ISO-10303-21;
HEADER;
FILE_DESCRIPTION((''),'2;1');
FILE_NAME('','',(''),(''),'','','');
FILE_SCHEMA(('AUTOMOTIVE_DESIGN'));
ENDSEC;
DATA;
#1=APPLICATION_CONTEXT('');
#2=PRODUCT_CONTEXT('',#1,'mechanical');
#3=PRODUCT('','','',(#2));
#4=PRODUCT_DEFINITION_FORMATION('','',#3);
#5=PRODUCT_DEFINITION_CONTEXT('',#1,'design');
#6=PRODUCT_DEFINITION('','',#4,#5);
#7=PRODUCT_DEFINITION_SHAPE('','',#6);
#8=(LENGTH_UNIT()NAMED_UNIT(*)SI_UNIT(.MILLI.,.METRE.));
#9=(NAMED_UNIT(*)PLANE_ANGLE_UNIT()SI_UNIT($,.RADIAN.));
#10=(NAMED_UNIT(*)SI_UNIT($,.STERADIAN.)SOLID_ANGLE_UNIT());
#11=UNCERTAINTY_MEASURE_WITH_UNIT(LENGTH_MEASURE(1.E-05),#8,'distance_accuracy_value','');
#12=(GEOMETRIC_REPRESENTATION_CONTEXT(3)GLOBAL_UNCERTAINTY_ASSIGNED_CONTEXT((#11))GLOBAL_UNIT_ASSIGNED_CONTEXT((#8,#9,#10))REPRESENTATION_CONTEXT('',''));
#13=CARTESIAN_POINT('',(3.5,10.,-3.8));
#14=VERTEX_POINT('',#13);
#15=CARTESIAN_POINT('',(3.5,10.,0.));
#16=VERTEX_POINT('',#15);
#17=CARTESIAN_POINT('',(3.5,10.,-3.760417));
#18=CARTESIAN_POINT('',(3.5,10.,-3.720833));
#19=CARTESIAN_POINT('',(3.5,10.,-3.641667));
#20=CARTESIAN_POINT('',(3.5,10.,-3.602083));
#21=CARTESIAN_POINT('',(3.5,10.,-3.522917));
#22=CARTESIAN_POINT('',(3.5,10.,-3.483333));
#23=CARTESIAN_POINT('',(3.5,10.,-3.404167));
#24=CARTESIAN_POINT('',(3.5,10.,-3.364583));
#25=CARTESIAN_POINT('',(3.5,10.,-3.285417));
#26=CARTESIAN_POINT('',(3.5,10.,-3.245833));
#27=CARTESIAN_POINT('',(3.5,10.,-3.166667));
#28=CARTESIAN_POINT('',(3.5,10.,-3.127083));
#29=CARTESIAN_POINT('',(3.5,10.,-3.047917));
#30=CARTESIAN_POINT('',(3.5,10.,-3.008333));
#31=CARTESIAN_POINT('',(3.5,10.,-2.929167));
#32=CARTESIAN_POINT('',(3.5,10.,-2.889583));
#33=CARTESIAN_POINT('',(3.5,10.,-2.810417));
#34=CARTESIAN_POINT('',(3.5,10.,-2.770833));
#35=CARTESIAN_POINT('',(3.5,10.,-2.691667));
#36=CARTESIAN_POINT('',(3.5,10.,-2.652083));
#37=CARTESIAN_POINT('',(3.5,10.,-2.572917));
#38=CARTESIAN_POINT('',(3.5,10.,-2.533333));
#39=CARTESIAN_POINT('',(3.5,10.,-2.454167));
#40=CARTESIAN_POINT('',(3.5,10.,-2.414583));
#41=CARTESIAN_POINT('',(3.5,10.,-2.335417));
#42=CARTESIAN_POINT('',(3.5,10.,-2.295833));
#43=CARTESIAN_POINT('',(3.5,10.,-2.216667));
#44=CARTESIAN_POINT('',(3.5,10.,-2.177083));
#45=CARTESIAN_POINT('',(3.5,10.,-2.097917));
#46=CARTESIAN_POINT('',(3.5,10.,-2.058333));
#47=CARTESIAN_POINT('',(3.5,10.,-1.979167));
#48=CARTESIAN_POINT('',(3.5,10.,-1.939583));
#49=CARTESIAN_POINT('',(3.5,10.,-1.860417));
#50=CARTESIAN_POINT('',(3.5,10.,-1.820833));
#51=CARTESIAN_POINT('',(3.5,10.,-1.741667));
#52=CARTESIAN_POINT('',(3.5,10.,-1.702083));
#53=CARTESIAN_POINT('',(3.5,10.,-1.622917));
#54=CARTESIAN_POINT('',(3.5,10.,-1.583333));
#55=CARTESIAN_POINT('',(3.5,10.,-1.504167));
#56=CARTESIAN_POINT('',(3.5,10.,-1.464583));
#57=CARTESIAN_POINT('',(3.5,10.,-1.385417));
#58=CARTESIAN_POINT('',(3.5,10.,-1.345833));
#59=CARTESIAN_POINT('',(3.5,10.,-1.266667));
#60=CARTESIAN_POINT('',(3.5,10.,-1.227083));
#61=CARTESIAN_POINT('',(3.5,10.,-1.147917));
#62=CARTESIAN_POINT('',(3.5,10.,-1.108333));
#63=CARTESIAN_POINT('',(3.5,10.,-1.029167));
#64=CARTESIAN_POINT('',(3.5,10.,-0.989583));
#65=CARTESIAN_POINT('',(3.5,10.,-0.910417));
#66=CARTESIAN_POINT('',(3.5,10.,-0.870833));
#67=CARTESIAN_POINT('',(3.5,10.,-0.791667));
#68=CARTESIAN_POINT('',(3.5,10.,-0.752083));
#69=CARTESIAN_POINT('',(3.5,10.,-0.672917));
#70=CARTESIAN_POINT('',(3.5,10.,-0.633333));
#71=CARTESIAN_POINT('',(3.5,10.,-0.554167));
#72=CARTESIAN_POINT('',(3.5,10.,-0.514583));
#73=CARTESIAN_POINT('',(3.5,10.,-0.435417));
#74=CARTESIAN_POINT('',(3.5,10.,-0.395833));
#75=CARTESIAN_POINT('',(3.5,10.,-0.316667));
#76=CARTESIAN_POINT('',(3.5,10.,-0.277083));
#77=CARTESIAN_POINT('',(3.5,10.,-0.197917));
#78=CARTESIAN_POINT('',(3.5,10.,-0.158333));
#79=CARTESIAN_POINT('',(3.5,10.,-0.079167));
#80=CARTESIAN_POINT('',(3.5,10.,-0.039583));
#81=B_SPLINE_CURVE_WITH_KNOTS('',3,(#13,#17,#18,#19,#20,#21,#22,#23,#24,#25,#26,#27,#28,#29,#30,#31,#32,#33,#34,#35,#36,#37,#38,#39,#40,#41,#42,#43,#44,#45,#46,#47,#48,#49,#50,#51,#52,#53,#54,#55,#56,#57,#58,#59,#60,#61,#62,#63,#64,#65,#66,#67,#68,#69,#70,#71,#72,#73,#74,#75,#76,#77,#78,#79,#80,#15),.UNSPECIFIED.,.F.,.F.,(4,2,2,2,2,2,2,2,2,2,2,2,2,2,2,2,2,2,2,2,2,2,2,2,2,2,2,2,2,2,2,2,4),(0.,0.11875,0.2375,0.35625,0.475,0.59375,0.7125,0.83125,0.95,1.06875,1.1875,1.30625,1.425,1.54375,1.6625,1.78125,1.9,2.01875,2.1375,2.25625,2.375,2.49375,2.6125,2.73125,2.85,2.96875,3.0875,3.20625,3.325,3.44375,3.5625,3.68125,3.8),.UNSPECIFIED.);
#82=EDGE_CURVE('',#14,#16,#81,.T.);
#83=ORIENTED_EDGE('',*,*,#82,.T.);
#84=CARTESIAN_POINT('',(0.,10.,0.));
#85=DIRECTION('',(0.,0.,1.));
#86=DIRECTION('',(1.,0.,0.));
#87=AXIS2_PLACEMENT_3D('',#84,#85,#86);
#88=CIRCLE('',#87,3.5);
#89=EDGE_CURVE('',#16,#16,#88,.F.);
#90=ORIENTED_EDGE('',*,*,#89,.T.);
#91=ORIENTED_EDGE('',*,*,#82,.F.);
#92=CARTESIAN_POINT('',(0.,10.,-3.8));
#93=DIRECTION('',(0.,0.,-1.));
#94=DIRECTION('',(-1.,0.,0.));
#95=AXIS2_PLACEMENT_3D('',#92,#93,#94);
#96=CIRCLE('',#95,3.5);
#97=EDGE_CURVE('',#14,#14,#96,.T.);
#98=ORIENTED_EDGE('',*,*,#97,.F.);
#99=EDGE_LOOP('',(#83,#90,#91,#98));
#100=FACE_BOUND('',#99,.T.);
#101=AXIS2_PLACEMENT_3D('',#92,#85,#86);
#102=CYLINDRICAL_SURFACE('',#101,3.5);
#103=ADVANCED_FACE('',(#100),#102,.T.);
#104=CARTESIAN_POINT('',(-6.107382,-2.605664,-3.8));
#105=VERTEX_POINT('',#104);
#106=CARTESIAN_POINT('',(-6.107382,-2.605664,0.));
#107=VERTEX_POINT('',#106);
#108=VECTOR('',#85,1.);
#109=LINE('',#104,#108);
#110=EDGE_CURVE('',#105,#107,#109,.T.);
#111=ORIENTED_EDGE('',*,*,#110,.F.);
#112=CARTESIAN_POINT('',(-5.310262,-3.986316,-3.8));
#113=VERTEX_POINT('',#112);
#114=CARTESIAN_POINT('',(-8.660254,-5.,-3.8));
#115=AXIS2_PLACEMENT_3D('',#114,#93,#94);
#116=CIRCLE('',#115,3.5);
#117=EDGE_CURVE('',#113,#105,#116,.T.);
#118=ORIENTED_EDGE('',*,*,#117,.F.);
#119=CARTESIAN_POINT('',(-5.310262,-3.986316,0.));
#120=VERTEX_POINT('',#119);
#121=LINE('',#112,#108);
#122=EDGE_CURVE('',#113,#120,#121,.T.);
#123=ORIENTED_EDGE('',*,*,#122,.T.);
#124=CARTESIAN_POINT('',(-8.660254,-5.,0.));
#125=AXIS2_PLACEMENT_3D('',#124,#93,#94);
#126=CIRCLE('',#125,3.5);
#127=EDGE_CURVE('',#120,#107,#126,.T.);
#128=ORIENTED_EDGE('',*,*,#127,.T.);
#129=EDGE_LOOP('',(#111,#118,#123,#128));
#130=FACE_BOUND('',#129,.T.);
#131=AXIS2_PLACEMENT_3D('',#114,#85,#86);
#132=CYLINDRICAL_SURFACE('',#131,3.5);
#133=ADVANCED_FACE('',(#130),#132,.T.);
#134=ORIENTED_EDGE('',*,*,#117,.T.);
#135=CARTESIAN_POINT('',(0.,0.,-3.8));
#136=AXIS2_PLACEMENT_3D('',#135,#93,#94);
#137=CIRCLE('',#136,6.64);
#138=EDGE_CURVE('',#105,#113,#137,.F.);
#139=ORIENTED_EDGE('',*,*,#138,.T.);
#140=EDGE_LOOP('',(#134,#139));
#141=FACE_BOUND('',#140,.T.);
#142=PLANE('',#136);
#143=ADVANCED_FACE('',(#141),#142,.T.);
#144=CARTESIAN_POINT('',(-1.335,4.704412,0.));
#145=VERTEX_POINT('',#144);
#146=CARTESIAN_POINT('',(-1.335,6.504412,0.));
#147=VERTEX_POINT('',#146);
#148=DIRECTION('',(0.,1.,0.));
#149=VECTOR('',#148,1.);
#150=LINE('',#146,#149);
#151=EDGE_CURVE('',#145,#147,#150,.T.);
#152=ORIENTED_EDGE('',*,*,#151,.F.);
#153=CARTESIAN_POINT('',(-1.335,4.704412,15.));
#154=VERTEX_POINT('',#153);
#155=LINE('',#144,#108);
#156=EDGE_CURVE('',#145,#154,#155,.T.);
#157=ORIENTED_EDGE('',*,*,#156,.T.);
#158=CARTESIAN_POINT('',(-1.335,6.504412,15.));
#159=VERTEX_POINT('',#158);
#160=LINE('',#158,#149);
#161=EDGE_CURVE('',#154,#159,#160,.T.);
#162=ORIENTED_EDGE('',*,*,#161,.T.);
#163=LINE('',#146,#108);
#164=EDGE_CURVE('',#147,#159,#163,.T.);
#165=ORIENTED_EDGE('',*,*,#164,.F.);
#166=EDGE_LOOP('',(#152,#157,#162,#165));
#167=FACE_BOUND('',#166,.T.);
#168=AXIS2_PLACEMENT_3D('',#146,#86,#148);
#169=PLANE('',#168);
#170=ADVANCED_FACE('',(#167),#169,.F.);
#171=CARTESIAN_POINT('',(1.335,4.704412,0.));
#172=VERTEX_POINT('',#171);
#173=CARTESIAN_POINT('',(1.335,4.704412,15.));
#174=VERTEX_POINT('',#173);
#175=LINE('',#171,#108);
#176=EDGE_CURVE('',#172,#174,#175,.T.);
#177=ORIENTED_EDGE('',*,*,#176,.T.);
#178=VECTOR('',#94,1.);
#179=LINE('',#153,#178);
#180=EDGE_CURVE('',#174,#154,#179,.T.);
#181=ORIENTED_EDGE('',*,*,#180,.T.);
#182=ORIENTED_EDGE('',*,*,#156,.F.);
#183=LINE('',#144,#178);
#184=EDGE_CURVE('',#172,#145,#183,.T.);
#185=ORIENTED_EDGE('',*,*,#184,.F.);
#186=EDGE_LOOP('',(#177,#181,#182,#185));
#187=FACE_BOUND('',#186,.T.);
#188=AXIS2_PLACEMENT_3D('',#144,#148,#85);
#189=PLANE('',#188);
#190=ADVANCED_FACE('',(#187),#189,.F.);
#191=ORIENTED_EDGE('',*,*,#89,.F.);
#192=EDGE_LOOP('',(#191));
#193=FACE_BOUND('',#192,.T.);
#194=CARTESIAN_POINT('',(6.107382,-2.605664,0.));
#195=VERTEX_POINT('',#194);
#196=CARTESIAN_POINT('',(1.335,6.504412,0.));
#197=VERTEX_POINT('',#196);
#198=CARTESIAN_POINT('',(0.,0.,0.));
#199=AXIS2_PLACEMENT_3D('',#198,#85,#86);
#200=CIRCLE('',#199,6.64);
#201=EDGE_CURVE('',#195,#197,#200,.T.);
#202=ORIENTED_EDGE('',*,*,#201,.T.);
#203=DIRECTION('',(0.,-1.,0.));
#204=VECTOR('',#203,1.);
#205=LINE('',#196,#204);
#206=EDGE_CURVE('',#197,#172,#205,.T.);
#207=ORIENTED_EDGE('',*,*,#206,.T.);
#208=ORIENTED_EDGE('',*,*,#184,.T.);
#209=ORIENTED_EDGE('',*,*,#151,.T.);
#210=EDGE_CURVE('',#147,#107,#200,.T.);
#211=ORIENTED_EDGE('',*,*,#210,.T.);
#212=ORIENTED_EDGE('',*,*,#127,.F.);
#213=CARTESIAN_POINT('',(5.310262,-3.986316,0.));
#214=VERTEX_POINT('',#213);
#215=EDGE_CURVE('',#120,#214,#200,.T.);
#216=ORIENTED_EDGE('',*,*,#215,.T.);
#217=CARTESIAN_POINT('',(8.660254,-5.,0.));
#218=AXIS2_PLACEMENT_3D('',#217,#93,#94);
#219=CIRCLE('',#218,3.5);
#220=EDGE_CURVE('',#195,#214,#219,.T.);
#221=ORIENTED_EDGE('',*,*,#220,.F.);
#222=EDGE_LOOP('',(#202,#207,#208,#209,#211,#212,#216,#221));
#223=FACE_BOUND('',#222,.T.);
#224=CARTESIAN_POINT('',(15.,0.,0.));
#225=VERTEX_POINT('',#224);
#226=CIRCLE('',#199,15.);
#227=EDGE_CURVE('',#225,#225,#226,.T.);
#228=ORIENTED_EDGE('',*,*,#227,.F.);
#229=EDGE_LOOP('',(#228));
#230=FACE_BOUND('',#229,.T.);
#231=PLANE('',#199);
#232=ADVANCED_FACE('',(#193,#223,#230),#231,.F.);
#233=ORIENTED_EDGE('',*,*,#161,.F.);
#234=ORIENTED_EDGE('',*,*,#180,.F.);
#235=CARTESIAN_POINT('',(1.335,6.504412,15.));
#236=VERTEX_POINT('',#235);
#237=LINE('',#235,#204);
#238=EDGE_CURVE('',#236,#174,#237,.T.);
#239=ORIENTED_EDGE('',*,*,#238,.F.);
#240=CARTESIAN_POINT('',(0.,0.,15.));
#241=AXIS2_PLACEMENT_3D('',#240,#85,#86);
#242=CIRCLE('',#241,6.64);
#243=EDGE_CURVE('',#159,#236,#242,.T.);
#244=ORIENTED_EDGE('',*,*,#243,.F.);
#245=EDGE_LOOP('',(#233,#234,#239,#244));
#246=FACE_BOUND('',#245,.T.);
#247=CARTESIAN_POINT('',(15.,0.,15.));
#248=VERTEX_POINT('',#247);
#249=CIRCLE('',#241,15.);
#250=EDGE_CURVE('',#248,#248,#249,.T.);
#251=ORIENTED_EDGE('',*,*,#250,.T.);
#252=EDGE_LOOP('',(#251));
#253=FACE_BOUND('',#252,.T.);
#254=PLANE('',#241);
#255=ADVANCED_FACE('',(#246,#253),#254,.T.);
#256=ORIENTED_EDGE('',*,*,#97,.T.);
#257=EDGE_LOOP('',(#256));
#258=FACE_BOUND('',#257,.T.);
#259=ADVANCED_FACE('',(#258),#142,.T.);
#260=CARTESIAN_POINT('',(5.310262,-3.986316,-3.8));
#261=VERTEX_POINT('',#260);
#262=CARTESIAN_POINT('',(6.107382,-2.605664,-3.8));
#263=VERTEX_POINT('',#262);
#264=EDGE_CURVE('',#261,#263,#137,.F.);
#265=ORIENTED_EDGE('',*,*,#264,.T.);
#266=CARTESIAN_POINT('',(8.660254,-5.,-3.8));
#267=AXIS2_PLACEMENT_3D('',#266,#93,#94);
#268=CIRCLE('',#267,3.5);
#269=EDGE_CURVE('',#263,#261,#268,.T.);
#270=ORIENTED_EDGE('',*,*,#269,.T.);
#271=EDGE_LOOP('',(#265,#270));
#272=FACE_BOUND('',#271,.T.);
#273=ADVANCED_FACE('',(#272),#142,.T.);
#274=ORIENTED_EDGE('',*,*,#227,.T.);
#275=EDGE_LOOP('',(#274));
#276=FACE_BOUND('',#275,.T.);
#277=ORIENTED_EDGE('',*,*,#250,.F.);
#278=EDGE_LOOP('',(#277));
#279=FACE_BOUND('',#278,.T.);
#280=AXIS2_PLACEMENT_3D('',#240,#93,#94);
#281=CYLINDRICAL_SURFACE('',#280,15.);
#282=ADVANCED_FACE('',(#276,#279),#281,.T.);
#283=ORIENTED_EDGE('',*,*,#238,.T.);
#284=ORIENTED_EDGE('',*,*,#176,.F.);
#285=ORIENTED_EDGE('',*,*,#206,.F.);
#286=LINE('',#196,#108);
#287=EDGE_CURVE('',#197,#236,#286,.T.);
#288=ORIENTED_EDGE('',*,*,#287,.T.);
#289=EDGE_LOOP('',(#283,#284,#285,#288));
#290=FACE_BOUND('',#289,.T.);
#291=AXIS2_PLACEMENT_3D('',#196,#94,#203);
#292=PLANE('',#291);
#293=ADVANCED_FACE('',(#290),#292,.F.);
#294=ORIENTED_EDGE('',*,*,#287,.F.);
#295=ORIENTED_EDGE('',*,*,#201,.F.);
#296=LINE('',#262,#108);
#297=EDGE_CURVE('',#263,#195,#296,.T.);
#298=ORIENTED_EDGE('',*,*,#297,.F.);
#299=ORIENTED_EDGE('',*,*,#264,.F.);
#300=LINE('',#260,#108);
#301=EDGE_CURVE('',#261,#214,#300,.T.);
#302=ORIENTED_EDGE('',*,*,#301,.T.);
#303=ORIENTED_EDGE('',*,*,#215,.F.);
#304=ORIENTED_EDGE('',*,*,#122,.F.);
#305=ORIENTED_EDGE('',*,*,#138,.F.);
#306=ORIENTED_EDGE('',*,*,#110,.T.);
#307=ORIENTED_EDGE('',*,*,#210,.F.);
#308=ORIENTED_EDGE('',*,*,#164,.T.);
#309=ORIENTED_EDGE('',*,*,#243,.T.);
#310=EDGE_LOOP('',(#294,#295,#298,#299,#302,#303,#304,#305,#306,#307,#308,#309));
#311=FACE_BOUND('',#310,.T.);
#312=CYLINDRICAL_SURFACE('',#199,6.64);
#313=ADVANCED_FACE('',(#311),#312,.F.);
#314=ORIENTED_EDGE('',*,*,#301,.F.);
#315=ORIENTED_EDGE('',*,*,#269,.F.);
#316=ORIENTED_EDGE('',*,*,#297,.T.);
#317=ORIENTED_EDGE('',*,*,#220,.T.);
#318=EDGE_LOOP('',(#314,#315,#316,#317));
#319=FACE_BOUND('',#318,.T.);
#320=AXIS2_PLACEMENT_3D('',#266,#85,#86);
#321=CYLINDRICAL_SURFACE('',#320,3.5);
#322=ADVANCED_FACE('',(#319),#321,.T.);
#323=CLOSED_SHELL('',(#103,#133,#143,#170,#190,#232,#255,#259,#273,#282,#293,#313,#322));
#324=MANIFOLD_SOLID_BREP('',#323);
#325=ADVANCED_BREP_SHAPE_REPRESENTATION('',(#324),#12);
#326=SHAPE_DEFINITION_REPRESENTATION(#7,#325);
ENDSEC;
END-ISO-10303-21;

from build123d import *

# Parameters (mm, degrees)
GEARFACEPROFILE_R        = 15
GEARFACEEXTRUDE_DEPTH    = 15
CENTERSLOT_DEPTH         = 26.980762114
GEARCONNECTORS_OUTLINE_R = 3.5
GEARCONNECTORS_DEPTH     = 3.8


# Read off the part's stored shape, not the designer's step: GearConnectors
with BuildPart() as part:
    # GearFaceProfile → GearFaceExtrude (new body)
    with BuildSketch(Plane.XY):
        Circle(GEARFACEPROFILE_R)
    extrude(amount=GEARFACEEXTRUDE_DEPTH)

    # Sketch1 → CenterSlot (cut, through all)
    with BuildSketch(Plane.XY.offset(15)):
        with BuildLine():
            Line((-1.335, 6.504411964), (-1.335, 4.704411964))
            Line((-1.335, 4.704411964), (1.335, 4.704411964))
            Line((1.335, 4.704411964), (1.335, 6.504411964))
            ThreePointArc((1.335, 6.504411964), (0, -6.64), (-1.335, 6.504411964))
        make_face()
    extrude(amount=-CENTERSLOT_DEPTH, mode=Mode.SUBTRACT)

    # GearConnectors outline → GearConnectors (add)
    with BuildSketch(Plane(origin=(0, 0, 0), x_dir=(-1, 0, 0), z_dir=(0, 0, -1))):
        with BuildLine():
            ThreePointArc((5.310262334, -3.986315836), (11.691342952, -6.749999998), (6.107381948, -2.605664164))
            ThreePointArc((6.107381948, -2.605664164), (5.750408681, -3.32), (5.310262334, -3.986315836))
        make_face()
        with BuildLine():
            ThreePointArc((-6.107381948, -2.605664164), (-11.691342952, -6.749999998), (-5.310262334, -3.986315836))
            ThreePointArc((-5.310262334, -3.986315836), (-5.750408681, -3.32), (-6.107381948, -2.605664164))
        make_face()
        with Locations((0, 10)):
            Circle(GEARCONNECTORS_OUTLINE_R)
    extrude(amount=GEARCONNECTORS_DEPTH)


solid = part.part
